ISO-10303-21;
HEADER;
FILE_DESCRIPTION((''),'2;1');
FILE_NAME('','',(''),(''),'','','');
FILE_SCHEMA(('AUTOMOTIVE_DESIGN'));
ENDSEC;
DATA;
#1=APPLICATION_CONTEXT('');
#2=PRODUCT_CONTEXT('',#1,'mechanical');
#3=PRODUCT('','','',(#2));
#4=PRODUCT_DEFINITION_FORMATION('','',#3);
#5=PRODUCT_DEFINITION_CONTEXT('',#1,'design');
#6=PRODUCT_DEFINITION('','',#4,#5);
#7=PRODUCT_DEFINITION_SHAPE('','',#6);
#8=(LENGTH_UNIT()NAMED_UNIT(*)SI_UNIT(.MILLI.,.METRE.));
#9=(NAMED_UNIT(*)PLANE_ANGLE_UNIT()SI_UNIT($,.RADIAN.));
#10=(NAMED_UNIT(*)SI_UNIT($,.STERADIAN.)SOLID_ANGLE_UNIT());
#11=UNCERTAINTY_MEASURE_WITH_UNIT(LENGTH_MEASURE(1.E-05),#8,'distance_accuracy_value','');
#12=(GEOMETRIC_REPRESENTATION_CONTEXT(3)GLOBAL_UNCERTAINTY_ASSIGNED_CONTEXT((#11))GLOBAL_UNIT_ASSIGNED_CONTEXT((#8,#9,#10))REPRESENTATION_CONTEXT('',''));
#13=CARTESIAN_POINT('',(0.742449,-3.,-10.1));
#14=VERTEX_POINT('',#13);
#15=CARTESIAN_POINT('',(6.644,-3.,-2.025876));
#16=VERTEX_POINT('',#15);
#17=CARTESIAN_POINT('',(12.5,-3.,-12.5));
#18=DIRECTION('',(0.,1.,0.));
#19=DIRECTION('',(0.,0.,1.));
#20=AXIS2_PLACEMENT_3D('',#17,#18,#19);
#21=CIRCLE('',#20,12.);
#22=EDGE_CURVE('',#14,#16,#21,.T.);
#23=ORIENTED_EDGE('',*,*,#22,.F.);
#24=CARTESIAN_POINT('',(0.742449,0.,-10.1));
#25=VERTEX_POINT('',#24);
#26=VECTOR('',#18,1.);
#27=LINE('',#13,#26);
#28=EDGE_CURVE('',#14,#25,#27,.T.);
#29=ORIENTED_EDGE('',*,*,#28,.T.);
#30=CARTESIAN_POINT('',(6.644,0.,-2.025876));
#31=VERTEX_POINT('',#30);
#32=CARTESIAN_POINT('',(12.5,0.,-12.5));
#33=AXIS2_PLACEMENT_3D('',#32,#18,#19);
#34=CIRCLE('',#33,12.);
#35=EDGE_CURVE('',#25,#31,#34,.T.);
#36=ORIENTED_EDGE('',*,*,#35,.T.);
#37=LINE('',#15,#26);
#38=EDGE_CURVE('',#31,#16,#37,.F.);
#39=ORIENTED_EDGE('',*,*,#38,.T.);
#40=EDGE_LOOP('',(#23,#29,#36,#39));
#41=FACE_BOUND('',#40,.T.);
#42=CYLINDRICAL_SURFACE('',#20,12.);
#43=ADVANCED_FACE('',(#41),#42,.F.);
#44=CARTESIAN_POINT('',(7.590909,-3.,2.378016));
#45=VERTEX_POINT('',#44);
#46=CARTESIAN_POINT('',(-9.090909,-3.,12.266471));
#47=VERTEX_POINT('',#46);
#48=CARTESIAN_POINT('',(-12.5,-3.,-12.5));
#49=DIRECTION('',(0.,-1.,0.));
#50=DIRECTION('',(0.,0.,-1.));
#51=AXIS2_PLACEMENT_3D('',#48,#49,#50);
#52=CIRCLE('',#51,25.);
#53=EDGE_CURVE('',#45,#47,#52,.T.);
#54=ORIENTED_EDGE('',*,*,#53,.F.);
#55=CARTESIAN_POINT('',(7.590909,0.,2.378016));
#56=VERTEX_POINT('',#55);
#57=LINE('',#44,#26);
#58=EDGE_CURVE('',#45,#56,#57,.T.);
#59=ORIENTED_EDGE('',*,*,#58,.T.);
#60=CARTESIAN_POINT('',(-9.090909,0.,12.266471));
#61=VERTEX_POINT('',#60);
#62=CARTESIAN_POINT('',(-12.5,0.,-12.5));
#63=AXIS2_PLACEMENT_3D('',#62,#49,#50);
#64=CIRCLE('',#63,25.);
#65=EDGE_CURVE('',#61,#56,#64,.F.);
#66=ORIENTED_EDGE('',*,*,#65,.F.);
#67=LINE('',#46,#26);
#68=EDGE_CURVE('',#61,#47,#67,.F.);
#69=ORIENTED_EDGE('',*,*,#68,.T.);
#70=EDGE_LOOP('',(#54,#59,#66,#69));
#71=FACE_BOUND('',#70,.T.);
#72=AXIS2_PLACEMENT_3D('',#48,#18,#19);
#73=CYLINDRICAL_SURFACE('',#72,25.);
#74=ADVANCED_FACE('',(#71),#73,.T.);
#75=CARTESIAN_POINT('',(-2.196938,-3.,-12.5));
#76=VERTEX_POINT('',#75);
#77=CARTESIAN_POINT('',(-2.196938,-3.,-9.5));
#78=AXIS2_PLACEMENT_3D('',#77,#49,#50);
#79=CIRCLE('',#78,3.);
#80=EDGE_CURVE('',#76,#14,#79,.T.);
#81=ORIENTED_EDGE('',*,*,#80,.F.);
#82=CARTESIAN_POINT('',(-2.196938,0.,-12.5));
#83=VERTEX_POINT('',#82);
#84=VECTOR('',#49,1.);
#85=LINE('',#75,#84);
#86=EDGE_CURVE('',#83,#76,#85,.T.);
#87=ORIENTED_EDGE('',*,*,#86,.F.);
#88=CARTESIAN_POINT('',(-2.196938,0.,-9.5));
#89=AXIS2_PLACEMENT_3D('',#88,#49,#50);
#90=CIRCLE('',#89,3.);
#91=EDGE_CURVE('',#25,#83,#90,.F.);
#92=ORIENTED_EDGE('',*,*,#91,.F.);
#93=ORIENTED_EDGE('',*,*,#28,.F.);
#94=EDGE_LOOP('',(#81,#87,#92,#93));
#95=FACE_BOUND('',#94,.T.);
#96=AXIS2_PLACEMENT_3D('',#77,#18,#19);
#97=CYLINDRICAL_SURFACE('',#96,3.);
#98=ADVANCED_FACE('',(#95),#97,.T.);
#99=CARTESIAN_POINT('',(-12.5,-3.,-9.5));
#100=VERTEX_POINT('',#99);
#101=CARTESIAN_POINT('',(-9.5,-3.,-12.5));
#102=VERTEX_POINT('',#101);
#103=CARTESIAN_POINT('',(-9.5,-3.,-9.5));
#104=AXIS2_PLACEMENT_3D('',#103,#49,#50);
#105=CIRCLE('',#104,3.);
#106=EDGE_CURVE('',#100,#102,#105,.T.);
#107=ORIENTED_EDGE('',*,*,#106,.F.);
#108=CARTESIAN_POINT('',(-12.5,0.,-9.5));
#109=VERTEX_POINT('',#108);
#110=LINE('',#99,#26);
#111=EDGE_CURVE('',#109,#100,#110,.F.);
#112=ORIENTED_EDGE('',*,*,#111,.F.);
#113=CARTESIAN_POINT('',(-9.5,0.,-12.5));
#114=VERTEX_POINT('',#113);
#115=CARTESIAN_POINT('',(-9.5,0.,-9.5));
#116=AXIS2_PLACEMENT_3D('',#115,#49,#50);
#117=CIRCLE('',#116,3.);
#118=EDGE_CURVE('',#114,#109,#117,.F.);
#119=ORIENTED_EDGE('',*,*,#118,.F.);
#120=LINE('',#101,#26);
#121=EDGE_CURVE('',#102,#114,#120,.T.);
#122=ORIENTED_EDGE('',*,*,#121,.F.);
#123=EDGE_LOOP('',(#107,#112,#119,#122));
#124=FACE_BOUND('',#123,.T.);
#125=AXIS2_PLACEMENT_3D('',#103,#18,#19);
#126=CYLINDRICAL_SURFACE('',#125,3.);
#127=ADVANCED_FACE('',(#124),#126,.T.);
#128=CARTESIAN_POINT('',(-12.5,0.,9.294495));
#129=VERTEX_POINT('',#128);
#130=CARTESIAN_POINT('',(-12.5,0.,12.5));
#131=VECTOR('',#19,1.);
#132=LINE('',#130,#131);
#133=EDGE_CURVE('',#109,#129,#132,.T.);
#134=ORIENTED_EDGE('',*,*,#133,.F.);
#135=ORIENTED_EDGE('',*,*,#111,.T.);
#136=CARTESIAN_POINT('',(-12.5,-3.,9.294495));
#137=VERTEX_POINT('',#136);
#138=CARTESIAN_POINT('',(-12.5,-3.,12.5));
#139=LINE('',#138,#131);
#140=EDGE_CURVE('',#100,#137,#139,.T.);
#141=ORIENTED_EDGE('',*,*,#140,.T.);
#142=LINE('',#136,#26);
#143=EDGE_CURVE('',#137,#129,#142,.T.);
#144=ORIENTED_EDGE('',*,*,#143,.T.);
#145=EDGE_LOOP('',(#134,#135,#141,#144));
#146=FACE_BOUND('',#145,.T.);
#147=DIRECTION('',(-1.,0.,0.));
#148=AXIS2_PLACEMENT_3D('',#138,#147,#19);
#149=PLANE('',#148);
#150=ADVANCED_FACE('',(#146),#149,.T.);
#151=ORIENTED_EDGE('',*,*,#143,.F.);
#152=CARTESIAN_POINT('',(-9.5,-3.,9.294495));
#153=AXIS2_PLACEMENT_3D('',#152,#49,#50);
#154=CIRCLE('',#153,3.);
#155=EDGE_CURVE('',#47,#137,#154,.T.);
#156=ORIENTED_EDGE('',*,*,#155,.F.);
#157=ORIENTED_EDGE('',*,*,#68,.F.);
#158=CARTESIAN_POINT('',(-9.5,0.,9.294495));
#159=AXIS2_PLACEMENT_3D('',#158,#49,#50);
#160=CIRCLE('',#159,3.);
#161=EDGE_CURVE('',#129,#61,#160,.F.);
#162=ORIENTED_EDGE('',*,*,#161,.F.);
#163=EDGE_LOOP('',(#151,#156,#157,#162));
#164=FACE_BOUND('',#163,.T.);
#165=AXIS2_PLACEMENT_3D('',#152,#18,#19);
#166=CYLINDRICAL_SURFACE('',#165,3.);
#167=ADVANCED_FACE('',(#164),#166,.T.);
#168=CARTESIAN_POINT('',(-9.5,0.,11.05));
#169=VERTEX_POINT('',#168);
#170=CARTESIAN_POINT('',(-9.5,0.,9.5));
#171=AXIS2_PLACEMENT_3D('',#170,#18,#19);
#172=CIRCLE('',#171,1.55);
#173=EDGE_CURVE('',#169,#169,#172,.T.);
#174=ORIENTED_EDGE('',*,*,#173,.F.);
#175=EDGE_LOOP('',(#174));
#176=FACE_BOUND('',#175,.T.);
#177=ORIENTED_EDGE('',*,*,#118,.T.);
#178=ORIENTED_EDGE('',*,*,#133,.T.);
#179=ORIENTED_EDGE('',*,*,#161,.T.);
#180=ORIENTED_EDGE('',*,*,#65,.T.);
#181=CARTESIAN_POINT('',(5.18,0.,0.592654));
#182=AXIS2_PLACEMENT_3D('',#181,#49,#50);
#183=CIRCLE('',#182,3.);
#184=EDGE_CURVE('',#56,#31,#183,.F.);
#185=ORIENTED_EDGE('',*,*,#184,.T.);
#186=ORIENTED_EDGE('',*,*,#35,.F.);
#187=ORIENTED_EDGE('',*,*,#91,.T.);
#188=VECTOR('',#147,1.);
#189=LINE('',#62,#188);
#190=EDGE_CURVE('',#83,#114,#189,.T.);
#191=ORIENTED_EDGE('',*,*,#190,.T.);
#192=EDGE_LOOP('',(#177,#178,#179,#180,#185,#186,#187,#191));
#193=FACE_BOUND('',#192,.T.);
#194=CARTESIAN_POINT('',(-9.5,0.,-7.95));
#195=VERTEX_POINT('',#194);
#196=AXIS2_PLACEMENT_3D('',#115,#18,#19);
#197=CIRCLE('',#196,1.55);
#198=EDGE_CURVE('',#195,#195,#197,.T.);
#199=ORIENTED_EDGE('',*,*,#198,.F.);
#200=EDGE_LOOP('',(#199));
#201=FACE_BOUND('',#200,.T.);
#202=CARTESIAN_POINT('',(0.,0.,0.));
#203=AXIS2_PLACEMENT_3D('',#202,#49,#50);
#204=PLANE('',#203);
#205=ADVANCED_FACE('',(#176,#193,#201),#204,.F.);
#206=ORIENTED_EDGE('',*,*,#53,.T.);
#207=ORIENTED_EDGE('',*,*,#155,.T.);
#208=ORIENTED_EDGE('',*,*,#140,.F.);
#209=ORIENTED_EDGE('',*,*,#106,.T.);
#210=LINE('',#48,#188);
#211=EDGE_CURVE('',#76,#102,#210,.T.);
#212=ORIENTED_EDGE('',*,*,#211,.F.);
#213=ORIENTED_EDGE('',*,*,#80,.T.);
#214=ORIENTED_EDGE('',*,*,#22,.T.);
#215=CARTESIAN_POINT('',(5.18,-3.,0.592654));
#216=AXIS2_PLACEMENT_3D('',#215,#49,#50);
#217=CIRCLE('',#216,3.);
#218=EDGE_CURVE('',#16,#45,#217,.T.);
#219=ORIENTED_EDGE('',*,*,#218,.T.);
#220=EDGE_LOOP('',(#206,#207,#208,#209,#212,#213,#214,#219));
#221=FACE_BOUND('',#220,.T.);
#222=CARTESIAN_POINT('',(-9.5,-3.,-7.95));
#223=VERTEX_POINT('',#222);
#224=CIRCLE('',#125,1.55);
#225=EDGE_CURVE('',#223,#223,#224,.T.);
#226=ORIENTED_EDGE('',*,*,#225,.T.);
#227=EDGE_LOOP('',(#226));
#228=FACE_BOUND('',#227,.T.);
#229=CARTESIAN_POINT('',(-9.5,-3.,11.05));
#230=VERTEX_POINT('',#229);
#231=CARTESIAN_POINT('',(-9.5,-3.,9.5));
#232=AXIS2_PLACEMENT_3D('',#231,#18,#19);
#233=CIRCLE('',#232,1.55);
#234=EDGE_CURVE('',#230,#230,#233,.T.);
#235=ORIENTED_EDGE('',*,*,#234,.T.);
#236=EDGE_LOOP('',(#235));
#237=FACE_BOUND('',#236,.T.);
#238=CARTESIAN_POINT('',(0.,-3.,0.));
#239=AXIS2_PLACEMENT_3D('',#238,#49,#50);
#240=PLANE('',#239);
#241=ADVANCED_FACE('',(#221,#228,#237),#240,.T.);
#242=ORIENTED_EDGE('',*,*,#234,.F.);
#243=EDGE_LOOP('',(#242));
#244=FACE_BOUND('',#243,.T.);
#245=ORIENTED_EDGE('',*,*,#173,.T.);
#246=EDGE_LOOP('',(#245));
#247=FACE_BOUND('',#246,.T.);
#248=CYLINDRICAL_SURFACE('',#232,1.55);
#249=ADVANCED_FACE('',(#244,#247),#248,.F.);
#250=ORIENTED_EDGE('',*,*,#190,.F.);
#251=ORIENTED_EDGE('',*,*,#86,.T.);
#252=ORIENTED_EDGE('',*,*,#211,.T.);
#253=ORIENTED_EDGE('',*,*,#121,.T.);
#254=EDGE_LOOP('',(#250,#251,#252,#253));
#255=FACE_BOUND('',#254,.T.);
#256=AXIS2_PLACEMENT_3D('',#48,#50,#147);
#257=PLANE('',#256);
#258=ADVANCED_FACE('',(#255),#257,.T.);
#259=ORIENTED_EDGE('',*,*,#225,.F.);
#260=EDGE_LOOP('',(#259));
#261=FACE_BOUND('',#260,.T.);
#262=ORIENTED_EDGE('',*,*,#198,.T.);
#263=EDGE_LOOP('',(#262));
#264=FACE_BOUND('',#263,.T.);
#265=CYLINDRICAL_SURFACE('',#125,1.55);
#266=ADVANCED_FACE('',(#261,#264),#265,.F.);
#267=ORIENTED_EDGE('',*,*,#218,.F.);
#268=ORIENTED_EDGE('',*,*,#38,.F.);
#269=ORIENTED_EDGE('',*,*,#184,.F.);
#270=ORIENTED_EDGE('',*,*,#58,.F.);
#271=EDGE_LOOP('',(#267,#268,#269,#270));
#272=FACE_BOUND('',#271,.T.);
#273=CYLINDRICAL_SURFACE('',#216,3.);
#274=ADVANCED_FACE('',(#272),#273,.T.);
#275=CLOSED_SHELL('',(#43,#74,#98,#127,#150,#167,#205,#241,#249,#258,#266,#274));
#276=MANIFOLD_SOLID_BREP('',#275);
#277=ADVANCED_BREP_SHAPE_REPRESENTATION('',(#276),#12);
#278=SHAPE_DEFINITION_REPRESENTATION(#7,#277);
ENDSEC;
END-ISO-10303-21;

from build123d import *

# Parameters (mm, degrees)
SKETCH1_W              = 25
SKETCH1_H              = 25
SKETCH1_R              = 1.55
BOSS_EXTRUDE1_DEPTH    = 3
FILLET1_R              = 25
CUT_EXTRUDE1_OUTLINE_W = 12
CUT_EXTRUDE1_OUTLINE_H = 3
FILLET3_R              = 3
FILLET4_R              = 3


# Read off the part's stored shape, not the designer's step: Cut-Extrude1
with BuildPart() as part:
    # Sketch1 → Boss-Extrude1 (new body)
    with BuildSketch(Plane(origin=(0, 0, 0), x_dir=(1, 0, 0), z_dir=(0, 1, 0))):
        Rectangle(SKETCH1_W, SKETCH1_H)
        with Locations(Location((-9.5, 9.5, 0), (0, 0, 270))):
            Circle(SKETCH1_R, mode=Mode.SUBTRACT)
        with Locations(Location((-9.5, -9.5, 0), (0, 0, 270))):
            Circle(SKETCH1_R, mode=Mode.SUBTRACT)
    extrude(amount=-BOSS_EXTRUDE1_DEPTH)

    # Fillet1
    fillet1_edges = [part.edges().sort_by_distance(p)[0] for p in [
        (12.5, -1.5, 12.5),
    ]]
    fillet(fillet1_edges, radius=FILLET1_R - 0.0001)  # a hair under: the kernel refuses the full size

    # Cut-Extrude1 outline → Cut-Extrude1 (revolve, cut)
    with BuildSketch(Plane(origin=(12.5, 0, -12.5), x_dir=(1, 0, 0), z_dir=(0, 0, 1))):
        with Locations((6, -1.5)):
            Rectangle(CUT_EXTRUDE1_OUTLINE_W, CUT_EXTRUDE1_OUTLINE_H)
    revolve(axis=Axis((12.5, 0, -12.5), (0, 1, 0)), mode=Mode.SUBTRACT)

    # Fillet3
    fillet3_edges = [part.edges().sort_by_distance(p)[0] for p in [
        (9.620035077, -1.5, -0.850716673),
        (0.5, -1.5, -12.5),
    ]]
    fillet(fillet3_edges, radius=FILLET3_R)

    # Fillet4
    fillet4_edges = [part.edges().sort_by_distance(p)[0] for p in [
        (-12.5, -1.5, 12.5),
        (-12.5, -1.5, -12.5),
    ]]
    fillet(fillet4_edges, radius=FILLET4_R)


solid = part.part
